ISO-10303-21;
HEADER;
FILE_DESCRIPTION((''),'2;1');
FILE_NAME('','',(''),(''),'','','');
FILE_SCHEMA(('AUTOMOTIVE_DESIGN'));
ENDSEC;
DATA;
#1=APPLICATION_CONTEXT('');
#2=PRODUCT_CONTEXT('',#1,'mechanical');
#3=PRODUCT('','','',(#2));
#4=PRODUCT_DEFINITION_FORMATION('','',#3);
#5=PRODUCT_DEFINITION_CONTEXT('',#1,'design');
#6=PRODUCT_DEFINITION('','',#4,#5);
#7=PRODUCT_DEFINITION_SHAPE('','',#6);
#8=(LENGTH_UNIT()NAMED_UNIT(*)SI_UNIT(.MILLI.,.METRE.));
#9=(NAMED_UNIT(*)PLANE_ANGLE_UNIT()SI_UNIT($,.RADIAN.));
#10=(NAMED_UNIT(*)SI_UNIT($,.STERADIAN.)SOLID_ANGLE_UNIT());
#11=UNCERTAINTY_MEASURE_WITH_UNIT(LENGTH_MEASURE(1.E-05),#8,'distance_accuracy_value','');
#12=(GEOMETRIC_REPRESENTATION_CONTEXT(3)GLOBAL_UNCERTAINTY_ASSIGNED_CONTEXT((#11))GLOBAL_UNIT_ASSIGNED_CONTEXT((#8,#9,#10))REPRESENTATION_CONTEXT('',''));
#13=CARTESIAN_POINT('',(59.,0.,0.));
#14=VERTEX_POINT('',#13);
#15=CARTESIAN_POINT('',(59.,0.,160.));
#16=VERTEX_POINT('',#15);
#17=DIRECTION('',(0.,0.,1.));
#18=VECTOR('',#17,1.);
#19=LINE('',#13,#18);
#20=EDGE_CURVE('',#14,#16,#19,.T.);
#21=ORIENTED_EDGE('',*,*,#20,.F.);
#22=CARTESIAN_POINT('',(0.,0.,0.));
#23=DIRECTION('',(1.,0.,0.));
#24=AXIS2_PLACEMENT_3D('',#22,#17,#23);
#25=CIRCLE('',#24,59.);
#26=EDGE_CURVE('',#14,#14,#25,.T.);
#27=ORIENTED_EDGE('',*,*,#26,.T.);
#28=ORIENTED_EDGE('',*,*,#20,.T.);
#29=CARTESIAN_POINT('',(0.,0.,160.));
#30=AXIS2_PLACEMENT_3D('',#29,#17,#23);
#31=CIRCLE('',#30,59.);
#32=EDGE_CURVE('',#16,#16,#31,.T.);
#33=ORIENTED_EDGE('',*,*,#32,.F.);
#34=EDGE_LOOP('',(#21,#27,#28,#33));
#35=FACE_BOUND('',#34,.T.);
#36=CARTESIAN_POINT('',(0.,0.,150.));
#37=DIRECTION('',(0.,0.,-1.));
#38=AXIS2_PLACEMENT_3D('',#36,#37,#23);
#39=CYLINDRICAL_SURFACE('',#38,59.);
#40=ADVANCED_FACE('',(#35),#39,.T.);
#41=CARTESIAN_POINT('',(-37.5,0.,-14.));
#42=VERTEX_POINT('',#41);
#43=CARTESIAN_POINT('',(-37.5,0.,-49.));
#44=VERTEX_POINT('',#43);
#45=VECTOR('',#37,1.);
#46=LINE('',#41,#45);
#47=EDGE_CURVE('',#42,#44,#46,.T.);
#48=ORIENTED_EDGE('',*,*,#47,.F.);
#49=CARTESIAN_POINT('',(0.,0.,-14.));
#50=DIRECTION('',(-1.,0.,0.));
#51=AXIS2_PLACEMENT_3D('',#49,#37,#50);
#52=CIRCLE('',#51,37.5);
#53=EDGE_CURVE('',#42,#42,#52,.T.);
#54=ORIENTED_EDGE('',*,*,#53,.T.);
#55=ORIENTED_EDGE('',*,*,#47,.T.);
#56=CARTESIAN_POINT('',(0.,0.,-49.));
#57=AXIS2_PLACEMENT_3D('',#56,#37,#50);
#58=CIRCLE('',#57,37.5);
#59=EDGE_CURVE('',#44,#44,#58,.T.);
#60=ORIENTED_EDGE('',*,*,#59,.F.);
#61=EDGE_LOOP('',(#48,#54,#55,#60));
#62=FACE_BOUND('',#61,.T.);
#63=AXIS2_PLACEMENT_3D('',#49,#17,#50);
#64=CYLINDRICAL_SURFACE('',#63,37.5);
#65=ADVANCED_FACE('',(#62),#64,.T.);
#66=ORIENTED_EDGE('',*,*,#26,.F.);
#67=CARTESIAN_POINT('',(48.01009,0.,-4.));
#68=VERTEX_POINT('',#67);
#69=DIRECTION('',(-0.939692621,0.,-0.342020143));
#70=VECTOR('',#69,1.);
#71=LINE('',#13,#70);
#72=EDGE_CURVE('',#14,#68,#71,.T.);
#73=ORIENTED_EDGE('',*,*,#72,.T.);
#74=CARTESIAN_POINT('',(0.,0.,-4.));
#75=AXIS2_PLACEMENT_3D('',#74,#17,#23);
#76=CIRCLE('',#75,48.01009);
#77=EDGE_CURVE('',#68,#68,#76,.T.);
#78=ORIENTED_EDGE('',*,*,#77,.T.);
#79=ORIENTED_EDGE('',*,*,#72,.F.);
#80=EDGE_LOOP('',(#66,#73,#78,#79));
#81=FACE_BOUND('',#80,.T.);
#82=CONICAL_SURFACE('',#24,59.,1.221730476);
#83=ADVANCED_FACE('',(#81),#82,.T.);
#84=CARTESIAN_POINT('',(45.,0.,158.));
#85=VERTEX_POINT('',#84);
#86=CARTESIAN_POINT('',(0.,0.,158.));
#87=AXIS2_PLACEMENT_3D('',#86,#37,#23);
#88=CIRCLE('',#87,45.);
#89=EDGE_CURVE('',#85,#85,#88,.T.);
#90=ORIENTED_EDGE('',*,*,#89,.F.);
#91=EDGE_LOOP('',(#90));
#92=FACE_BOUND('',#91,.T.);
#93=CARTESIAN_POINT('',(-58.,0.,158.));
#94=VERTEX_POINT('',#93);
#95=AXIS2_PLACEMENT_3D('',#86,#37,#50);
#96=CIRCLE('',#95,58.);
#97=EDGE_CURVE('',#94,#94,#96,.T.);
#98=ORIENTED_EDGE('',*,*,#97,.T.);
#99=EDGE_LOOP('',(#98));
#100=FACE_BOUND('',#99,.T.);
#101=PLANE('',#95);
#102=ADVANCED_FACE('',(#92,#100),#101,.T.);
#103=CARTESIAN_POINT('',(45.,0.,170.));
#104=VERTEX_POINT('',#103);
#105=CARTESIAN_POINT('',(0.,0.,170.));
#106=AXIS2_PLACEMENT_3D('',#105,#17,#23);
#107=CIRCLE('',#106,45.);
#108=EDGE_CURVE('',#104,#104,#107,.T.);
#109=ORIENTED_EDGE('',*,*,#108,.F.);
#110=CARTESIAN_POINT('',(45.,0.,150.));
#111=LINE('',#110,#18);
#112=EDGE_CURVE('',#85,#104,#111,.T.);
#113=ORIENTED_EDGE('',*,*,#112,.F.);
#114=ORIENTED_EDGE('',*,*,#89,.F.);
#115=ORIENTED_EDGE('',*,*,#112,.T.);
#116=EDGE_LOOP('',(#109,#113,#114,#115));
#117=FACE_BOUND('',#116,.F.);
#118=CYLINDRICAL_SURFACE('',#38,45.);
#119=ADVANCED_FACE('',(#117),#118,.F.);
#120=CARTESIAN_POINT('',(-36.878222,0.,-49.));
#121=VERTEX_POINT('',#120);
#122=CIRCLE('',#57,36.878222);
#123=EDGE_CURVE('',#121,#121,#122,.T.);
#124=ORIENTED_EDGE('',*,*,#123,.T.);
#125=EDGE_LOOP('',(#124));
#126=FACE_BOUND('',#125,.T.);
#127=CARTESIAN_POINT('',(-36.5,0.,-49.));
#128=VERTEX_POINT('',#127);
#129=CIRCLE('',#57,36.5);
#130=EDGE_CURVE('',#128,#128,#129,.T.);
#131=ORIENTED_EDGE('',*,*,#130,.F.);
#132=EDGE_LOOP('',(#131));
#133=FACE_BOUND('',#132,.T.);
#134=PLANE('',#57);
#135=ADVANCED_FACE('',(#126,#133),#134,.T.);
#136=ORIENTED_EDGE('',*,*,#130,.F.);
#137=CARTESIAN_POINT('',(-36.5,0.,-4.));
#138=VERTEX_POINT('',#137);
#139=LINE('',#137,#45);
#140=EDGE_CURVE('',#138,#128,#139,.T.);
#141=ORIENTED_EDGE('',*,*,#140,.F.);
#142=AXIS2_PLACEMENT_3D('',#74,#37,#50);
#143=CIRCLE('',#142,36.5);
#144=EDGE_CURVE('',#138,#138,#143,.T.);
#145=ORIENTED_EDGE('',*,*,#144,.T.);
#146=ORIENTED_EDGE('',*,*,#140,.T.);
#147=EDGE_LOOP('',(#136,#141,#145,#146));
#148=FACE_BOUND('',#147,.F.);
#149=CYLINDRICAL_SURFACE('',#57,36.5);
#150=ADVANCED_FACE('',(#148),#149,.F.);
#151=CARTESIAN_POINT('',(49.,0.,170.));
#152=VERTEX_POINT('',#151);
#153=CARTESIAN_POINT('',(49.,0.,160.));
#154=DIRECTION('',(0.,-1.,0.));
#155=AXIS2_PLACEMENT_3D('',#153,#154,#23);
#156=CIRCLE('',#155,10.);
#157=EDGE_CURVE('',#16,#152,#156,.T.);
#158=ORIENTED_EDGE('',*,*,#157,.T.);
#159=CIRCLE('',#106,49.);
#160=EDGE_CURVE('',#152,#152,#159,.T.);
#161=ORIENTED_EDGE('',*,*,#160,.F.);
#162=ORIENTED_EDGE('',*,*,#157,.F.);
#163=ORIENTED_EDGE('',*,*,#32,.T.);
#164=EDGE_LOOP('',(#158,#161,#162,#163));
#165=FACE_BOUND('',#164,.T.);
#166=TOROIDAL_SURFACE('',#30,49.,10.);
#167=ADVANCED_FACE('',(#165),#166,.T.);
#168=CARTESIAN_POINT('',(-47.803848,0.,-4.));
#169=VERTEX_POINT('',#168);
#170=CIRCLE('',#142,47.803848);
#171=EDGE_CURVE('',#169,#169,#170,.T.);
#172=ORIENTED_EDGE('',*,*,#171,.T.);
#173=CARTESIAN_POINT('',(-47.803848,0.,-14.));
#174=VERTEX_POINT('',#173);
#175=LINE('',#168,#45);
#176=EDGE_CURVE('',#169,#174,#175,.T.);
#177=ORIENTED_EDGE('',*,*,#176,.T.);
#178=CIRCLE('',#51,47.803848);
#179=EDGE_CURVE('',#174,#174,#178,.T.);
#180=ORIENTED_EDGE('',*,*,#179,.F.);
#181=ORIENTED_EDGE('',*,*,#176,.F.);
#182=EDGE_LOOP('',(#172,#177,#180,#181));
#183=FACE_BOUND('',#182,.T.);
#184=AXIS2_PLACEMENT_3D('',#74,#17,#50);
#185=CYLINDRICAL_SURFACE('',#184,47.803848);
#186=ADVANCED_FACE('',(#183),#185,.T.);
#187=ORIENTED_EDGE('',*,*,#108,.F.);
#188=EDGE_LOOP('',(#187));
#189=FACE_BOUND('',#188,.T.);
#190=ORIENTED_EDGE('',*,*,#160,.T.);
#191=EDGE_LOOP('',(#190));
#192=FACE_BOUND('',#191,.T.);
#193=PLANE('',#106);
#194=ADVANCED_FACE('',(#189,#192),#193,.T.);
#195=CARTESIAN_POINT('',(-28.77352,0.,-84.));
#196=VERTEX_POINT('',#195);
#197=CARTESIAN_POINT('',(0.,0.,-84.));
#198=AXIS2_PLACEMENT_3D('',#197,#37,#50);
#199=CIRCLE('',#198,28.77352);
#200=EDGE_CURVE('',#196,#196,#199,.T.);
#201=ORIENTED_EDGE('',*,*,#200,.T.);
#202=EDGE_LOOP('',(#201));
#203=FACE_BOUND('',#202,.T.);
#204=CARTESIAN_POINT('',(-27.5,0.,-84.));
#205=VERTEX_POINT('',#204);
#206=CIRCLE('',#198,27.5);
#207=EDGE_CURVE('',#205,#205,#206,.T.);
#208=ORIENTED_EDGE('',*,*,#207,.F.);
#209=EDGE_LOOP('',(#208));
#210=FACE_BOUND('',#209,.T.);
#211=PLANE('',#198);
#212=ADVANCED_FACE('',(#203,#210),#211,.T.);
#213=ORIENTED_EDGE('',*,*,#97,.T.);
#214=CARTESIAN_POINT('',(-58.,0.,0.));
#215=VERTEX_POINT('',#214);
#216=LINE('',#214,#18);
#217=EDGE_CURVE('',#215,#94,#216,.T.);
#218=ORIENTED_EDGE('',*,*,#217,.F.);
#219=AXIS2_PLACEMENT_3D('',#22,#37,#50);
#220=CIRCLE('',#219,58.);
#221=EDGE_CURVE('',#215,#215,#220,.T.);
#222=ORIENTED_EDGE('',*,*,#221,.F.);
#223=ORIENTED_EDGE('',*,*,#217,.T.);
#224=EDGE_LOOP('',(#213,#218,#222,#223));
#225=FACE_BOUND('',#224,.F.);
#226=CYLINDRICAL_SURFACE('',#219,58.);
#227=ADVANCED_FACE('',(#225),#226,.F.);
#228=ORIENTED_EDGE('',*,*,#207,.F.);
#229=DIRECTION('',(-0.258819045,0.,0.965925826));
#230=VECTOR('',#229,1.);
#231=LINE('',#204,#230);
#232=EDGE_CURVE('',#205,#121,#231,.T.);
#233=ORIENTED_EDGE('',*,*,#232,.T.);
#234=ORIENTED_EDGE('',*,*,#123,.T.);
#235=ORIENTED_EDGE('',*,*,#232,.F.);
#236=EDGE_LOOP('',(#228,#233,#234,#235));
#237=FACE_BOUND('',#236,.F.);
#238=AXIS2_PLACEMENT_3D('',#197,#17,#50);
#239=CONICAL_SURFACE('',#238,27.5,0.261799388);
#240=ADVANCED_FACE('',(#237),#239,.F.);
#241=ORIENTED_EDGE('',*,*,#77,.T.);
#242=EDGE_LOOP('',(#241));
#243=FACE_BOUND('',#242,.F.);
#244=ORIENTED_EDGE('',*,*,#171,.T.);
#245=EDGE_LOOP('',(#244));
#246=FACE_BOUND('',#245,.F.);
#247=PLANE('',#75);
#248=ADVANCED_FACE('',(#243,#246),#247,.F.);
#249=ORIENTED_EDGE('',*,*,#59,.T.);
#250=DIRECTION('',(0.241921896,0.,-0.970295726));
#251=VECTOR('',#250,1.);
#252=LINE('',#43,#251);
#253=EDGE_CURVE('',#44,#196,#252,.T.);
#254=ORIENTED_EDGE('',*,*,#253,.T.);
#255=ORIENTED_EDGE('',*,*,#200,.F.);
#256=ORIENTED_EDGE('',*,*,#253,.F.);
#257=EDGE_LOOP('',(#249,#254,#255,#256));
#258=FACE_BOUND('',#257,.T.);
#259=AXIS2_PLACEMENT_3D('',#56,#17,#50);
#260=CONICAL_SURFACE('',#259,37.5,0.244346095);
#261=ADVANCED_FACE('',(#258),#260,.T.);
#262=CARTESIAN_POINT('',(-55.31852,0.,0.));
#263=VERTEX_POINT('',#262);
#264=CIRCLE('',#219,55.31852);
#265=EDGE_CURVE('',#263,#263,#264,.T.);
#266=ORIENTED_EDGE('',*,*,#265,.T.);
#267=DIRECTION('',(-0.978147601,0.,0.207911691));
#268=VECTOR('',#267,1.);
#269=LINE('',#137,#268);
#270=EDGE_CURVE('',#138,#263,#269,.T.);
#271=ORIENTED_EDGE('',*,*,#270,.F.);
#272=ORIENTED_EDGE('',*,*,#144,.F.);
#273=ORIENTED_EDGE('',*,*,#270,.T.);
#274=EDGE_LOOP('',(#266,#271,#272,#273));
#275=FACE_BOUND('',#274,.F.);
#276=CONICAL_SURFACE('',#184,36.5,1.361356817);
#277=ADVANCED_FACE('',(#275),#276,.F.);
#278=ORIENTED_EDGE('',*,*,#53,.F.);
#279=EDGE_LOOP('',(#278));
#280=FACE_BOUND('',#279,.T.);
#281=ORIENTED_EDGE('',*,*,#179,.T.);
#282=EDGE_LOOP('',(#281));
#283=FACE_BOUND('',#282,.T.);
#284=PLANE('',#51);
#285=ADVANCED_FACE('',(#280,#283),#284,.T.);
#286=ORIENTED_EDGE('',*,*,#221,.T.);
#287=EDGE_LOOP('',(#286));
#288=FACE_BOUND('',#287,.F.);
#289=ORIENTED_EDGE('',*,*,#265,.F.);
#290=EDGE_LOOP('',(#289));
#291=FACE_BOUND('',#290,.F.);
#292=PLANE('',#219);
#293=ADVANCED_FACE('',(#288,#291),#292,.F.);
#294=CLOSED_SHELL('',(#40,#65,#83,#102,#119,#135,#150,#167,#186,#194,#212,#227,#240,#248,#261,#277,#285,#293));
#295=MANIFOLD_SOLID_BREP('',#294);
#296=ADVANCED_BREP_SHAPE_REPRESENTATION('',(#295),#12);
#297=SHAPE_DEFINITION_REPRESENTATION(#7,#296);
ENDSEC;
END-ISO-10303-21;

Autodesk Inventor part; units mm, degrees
ref_plane "YZ Plane" through (0, 0, 0) normal (1, 0, 0) x (0, 1, 0)
ref_plane "XZ Plane" through (0, 0, 0) normal (0, 1, 0) x (-1, 0, 0)
ref_plane "XY Plane" through (0, 0, 0) normal (0, 0, 1) x (1, 0, 0)
sketch "Эскиз1" plane through (0, 0, 0) normal (0, 0, 1) x (1, 0, 0)
  circle A0 centre (0, 0) radius 59
  dimension "d0" = 118
extrude "Выдавливание1" add sketch "Эскиз1" along normal blind 150
extrude "Выдавливание2" add sketch "Эскиз1" against normal blind 4 draft -70
sketch "Эскиз2" plane through (0, 0, -4) normal (0, 0, -1) x (-1, 0, 0)
  circle A0 centre (0, 0) radius 47.803848
extrude "Выдавливание3" add sketch "Эскиз2" along normal blind 10
sketch "Эскиз3" plane through (0, 0, -14) normal (0, 0, -1) x (-1, 0, 0)
  circle A0 centre (0, 0) radius 37.5
  circle A1 centre (0, 0) radius 36.5
  dimension "d7" = 75
  dimension "d20" = 73
extrude "Выдавливание4" add sketch "Эскиз3" along normal blind 35 contours A0 | A1
sketch "Эскиз4" plane through (0, 0, -49) normal (0, 0, -1) x (-1, 0, 0)
  point P0 (0, 0)
sketch "Эскиз5" plane through (0, 0, -49) normal (0, 0, -1) x (-1, 0, 0)
  circle A0 centre (0, 0) radius 37.5
  circle A1 centre (0, 0) radius 35
  dimension "d16" = 70
sketch "Эскиз5 outline for Выдавливание5" plane through (0, 0, -49) normal (0, 0, -1) x (-1, 0, 0)
  circle A0 centre (0, 0) radius 37.5
extrude "Выдавливание5" add sketch "Эскиз5 outline for Выдавливание5" along normal blind 35 draft -14
sketch "Эскиз6" plane through (0, 0, 150) normal (0, 0, 1) x (1, 0, 0)
  circle A0 centre (0, 0) radius 59
  circle A1 centre (0, 0) radius 45
  dimension "d12" = 90
extrude "Выдавливание6" add sketch "Эскиз6" along normal blind 20
fillet "Сопряжение1" radius 10 1 edges at (-59, 0, 170)
sketch "Эскиз7" plane through (0, 0, -84) normal (0, 0, -1) x (-1, 0, 0)
  circle A0 centre (0, 0) radius 28.77352
  circle A1 centre (0, 0) radius 27.5
  dimension "d17" = 55
extrude "Выдавливание7" cut sketch "Эскиз7" against normal blind 35 draft 15 contours A1
sketch "Эскиз8" plane through (0, 0, -49) normal (0, 0, -1) x (-1, 0, 0)
  circle A0 centre (0, 0) radius 36.5
  dimension "d21" = 73
extrude "Выдавливание8" cut sketch "Эскиз8" against normal blind 35
sketch "Эскиз9" plane through (0, 0, -14) normal (0, 0, -1) x (-1, 0, 0)
  circle A0 centre (0, 0) radius 36.5
  dimension "d24" = 73
extrude "Выдавливание9" cut sketch "Эскиз9" against normal blind 10
sketch "Эскиз10" plane through (0, 0, -4) normal (0, 0, -1) x (-1, 0, 0)
  circle A0 centre (0, 0) radius 36.5
  dimension "d27" = 73
extrude "Выдавливание10" cut sketch "Эскиз10" against normal blind 4 draft 78
sketch "Эскиз11" plane through (0, 0, 0) normal (0, 0, -1) x (-1, 0, 0)
  circle A0 centre (0, 0) radius 58
  dimension "d30" = 116
extrude "Выдавливание11" cut sketch "Эскиз11" against normal blind 158
properties part number "Колибри-Шаблон"
